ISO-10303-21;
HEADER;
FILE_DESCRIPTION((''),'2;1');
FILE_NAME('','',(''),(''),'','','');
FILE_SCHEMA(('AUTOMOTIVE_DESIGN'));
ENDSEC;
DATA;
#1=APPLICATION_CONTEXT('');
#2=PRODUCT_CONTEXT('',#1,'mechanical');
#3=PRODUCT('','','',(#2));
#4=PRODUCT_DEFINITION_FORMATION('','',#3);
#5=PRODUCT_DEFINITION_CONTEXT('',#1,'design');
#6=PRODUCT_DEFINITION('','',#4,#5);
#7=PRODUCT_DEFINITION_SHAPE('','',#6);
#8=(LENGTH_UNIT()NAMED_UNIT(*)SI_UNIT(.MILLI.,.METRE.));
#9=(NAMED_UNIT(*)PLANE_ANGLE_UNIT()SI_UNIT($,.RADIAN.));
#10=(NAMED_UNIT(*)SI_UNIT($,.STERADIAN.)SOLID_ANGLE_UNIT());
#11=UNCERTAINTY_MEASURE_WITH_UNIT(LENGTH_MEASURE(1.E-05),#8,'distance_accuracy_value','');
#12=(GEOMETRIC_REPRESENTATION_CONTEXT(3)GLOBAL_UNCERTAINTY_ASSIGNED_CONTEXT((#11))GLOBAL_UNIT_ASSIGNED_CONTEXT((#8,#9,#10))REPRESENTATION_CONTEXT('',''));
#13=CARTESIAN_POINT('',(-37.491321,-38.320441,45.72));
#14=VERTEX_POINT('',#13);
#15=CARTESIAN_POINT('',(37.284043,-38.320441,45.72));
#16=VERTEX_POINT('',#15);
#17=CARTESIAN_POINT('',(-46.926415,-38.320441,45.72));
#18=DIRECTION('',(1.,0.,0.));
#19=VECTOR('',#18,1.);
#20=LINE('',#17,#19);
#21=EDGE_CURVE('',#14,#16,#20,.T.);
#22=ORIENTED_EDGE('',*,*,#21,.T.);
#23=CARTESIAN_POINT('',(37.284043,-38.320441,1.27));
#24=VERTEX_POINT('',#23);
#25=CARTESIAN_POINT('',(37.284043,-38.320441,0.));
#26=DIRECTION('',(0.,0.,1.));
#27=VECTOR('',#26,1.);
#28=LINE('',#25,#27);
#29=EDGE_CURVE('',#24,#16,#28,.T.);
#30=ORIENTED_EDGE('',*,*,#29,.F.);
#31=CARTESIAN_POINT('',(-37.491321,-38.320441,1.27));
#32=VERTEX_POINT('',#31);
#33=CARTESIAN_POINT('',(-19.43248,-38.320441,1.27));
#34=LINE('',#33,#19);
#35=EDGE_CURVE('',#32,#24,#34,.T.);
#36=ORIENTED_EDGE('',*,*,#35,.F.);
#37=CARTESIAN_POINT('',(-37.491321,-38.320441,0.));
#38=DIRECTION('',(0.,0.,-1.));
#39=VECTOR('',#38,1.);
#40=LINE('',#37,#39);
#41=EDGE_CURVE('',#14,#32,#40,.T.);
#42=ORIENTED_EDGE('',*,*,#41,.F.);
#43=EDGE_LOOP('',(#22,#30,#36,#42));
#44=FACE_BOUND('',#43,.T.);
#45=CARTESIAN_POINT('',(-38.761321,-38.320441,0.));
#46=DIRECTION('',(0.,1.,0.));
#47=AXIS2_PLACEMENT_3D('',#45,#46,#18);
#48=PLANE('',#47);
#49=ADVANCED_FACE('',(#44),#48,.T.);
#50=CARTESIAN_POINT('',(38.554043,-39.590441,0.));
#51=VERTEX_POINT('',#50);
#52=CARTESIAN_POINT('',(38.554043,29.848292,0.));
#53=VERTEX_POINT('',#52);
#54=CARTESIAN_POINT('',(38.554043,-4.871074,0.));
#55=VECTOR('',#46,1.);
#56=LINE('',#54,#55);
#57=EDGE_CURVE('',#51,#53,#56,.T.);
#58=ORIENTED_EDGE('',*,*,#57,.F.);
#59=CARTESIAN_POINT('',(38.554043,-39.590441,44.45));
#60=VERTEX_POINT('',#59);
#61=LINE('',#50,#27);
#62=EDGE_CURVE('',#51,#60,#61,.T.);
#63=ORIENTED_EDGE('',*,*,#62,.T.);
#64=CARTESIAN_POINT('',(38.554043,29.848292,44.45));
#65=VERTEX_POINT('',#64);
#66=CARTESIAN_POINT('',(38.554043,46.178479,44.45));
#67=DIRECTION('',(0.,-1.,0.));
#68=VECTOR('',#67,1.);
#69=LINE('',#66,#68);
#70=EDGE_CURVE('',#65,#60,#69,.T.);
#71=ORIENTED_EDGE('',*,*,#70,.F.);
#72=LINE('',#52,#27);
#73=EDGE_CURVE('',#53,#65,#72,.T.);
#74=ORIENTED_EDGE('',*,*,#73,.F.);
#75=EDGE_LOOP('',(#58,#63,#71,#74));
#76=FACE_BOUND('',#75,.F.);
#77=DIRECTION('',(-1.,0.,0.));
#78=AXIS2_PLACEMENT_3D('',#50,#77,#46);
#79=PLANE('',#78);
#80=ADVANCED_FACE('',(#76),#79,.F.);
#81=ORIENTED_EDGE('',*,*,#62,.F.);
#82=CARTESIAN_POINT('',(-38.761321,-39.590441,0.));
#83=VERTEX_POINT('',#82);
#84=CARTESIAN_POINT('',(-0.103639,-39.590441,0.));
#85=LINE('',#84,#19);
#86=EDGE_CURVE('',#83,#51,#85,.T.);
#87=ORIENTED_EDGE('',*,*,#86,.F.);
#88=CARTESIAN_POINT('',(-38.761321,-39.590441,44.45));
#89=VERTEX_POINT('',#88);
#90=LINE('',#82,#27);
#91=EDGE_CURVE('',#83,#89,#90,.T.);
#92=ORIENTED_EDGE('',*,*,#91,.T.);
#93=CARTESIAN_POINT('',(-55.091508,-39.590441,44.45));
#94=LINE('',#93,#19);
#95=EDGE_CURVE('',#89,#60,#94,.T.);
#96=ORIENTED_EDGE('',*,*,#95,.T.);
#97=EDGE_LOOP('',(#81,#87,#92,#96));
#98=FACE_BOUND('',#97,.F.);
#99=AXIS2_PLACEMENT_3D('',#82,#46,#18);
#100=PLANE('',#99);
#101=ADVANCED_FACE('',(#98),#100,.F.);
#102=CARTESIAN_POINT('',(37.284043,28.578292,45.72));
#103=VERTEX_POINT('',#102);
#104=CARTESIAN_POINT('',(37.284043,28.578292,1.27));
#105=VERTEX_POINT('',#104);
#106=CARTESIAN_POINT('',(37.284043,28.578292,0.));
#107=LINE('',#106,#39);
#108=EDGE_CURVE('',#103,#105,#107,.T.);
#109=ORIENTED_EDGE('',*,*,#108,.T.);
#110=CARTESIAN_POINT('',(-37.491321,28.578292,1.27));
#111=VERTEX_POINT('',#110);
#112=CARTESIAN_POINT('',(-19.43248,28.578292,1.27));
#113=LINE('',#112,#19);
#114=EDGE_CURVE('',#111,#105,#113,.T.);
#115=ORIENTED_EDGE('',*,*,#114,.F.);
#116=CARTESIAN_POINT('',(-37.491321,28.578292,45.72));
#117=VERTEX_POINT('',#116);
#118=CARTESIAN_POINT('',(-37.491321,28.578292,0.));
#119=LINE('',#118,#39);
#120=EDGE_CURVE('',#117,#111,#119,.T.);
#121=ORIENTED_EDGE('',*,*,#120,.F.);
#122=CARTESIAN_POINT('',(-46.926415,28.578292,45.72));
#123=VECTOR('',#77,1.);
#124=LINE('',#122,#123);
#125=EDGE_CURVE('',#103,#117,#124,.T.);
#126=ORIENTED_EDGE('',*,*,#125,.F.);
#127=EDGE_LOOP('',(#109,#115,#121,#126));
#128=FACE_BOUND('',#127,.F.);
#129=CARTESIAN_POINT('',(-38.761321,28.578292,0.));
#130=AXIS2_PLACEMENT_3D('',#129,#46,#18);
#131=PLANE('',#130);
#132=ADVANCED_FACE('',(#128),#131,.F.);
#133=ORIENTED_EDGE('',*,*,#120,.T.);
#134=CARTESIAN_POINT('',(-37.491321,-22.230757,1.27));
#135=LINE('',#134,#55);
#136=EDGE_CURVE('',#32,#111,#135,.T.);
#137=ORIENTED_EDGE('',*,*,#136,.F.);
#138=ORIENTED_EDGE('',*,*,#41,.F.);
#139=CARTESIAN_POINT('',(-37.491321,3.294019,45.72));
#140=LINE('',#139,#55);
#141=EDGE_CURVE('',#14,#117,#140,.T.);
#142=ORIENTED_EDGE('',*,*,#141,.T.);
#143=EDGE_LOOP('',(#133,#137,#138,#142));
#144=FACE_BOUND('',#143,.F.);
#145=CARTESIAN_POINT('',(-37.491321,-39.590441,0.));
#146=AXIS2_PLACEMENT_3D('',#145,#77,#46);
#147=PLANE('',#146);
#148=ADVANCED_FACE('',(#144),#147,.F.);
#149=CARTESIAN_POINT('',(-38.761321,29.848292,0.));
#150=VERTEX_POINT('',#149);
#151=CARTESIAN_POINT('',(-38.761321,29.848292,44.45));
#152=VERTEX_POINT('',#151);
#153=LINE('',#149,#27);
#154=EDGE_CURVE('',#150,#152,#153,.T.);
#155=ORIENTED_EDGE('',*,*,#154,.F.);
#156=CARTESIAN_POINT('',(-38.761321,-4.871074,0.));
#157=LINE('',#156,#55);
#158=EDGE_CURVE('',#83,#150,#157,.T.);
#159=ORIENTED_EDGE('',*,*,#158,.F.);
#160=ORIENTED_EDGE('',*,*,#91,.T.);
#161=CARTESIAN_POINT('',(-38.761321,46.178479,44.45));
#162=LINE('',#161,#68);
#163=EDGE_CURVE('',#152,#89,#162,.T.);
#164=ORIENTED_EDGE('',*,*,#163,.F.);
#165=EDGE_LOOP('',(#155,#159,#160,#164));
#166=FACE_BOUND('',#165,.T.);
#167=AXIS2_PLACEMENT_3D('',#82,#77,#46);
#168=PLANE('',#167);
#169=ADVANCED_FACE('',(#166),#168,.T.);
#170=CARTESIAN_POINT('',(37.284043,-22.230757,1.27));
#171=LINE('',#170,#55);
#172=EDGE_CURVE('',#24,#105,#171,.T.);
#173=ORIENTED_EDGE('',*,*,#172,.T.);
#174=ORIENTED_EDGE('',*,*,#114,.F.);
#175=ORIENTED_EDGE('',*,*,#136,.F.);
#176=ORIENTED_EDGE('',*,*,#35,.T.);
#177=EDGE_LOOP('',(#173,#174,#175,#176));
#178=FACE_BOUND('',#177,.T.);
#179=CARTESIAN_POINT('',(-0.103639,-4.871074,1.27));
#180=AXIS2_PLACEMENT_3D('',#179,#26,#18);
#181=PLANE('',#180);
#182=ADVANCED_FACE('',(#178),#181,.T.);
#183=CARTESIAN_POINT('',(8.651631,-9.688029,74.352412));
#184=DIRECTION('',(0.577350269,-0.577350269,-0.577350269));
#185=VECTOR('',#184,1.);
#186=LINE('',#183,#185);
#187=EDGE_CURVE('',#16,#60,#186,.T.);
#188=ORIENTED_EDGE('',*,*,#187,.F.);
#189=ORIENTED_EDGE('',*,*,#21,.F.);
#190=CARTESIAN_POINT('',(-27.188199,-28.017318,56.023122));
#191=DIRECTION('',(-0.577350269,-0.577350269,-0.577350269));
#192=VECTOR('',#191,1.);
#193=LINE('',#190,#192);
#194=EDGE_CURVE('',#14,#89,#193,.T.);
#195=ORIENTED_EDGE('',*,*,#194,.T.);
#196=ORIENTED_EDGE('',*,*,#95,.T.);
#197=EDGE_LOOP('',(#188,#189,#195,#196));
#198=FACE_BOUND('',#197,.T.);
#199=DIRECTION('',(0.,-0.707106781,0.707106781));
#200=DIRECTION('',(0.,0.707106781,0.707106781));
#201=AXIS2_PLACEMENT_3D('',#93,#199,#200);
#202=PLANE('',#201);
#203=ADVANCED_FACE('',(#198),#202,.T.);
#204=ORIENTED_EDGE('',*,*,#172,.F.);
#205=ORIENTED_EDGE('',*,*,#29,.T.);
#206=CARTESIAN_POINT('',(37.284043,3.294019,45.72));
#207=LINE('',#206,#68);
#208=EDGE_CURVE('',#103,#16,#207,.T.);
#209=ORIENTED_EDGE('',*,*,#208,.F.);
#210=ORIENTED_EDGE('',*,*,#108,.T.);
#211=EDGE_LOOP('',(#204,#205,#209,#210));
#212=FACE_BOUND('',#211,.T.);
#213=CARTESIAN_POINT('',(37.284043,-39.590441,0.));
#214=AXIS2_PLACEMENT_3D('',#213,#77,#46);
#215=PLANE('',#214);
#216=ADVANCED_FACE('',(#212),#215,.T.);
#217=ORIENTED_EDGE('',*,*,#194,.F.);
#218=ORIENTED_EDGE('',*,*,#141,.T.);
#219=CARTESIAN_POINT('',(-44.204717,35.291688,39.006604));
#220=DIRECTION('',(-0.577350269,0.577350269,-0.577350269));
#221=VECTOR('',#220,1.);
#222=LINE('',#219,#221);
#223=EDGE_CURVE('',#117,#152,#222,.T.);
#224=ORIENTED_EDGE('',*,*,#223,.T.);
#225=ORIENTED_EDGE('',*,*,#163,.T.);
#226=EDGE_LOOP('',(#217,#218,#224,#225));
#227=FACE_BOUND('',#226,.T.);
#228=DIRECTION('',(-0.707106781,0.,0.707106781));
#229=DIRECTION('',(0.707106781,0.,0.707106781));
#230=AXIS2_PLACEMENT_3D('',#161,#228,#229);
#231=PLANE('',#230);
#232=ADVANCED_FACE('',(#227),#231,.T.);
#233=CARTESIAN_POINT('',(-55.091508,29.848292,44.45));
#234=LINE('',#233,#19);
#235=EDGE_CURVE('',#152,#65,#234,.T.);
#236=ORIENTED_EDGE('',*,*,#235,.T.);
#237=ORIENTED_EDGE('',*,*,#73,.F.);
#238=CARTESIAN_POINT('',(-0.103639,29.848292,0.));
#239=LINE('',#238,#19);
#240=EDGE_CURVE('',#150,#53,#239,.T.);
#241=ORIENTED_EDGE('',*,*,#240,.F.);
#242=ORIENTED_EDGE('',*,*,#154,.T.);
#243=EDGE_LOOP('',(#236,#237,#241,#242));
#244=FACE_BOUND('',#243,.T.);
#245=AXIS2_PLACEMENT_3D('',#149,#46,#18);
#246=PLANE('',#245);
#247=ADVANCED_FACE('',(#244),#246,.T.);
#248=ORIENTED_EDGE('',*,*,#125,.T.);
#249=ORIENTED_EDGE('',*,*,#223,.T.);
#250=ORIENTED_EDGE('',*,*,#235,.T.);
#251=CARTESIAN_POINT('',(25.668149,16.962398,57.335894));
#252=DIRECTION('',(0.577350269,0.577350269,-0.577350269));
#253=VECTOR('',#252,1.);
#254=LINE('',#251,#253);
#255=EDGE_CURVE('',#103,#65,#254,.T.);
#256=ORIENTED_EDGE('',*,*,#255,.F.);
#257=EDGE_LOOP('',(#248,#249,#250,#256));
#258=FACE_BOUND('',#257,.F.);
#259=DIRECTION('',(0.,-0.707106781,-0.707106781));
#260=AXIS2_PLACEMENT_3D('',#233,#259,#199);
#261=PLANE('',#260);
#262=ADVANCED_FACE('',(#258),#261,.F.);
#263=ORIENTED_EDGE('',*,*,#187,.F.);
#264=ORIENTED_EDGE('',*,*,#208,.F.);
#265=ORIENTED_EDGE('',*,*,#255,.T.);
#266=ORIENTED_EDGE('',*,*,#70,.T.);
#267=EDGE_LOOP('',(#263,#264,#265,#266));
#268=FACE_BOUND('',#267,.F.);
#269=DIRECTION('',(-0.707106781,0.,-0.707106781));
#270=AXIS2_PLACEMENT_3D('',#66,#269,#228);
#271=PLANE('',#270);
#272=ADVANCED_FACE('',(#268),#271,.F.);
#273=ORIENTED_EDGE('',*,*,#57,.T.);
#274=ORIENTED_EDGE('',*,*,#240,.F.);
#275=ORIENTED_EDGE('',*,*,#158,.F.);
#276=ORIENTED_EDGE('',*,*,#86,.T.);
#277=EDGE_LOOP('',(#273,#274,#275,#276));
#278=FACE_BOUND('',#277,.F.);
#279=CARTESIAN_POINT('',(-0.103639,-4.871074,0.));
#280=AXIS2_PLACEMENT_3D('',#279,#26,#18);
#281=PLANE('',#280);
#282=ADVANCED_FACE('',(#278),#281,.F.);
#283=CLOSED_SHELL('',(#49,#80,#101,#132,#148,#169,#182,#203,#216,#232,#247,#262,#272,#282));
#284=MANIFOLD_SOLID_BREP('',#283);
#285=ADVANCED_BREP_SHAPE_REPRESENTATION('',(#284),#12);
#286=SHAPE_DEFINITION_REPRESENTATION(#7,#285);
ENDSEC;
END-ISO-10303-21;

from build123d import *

# Parameters (mm, degrees)
F0_W        = 77.315364033
F0_H        = 69.4387331605
F1_DEPTH    = 50.8
F2_T        = -1.27
F3_T1_DEPTH = 109.9757379802
F3_T3_DEPTH = 102.0991071077


# Not quite as in the source:
# - a fillet or chamfer that OpenCascade refuses, or shapes differently, is made with other operations: its cross-section is extruded or revolved along the edge and cut away or added
# - the program builds the solid bodies; features that only make, move or delete a surface that nothing else refers to are left out


with BuildPart() as f1:
    # F0 (on Top) → F1 (new body)
    with BuildSketch(Plane.XY):
        with Locations((-0.1036394387, -4.8710741103)):
            Rectangle(F0_W, F0_H)
    extrude(amount=F1_DEPTH)

    # F2
    f2_openings = [f1.faces().sort_by_distance(p)[0] for p in [
        (-0.103639, -4.871074, 50.8),
    ]]
    offset(amount=F2_T, openings=f2_openings)

    # F3: chamfer of 6.35 on 4 edges, made by hand

    # F3_s2 → F3_t1 (cut)
    with BuildSketch(Plane.YZ.offset(-55.0915084288)):
        Polygon((-39.5904406905, 44.45), (-33.2404406905, 50.8), (-39.5904406905, 50.8), align=None)
        Polygon((29.84829247, 44.45), (23.49829247, 50.8), (29.84829247, 50.8), align=None)
    extrude(amount=F3_T1_DEPTH, mode=Mode.SUBTRACT)

    # F3_s4 → F3_t3 (cut)
    with BuildSketch(Plane.XZ.offset(-46.1784794436)):
        Polygon((-38.7613214552, 44.45), (-32.4113214552, 50.8), (-38.7613214552, 50.8), align=None)
        Polygon((38.5540425777, 44.45), (32.2040425777, 50.8), (38.5540425777, 50.8), align=None)
    extrude(amount=F3_T3_DEPTH, mode=Mode.SUBTRACT)


solid = f1.part
